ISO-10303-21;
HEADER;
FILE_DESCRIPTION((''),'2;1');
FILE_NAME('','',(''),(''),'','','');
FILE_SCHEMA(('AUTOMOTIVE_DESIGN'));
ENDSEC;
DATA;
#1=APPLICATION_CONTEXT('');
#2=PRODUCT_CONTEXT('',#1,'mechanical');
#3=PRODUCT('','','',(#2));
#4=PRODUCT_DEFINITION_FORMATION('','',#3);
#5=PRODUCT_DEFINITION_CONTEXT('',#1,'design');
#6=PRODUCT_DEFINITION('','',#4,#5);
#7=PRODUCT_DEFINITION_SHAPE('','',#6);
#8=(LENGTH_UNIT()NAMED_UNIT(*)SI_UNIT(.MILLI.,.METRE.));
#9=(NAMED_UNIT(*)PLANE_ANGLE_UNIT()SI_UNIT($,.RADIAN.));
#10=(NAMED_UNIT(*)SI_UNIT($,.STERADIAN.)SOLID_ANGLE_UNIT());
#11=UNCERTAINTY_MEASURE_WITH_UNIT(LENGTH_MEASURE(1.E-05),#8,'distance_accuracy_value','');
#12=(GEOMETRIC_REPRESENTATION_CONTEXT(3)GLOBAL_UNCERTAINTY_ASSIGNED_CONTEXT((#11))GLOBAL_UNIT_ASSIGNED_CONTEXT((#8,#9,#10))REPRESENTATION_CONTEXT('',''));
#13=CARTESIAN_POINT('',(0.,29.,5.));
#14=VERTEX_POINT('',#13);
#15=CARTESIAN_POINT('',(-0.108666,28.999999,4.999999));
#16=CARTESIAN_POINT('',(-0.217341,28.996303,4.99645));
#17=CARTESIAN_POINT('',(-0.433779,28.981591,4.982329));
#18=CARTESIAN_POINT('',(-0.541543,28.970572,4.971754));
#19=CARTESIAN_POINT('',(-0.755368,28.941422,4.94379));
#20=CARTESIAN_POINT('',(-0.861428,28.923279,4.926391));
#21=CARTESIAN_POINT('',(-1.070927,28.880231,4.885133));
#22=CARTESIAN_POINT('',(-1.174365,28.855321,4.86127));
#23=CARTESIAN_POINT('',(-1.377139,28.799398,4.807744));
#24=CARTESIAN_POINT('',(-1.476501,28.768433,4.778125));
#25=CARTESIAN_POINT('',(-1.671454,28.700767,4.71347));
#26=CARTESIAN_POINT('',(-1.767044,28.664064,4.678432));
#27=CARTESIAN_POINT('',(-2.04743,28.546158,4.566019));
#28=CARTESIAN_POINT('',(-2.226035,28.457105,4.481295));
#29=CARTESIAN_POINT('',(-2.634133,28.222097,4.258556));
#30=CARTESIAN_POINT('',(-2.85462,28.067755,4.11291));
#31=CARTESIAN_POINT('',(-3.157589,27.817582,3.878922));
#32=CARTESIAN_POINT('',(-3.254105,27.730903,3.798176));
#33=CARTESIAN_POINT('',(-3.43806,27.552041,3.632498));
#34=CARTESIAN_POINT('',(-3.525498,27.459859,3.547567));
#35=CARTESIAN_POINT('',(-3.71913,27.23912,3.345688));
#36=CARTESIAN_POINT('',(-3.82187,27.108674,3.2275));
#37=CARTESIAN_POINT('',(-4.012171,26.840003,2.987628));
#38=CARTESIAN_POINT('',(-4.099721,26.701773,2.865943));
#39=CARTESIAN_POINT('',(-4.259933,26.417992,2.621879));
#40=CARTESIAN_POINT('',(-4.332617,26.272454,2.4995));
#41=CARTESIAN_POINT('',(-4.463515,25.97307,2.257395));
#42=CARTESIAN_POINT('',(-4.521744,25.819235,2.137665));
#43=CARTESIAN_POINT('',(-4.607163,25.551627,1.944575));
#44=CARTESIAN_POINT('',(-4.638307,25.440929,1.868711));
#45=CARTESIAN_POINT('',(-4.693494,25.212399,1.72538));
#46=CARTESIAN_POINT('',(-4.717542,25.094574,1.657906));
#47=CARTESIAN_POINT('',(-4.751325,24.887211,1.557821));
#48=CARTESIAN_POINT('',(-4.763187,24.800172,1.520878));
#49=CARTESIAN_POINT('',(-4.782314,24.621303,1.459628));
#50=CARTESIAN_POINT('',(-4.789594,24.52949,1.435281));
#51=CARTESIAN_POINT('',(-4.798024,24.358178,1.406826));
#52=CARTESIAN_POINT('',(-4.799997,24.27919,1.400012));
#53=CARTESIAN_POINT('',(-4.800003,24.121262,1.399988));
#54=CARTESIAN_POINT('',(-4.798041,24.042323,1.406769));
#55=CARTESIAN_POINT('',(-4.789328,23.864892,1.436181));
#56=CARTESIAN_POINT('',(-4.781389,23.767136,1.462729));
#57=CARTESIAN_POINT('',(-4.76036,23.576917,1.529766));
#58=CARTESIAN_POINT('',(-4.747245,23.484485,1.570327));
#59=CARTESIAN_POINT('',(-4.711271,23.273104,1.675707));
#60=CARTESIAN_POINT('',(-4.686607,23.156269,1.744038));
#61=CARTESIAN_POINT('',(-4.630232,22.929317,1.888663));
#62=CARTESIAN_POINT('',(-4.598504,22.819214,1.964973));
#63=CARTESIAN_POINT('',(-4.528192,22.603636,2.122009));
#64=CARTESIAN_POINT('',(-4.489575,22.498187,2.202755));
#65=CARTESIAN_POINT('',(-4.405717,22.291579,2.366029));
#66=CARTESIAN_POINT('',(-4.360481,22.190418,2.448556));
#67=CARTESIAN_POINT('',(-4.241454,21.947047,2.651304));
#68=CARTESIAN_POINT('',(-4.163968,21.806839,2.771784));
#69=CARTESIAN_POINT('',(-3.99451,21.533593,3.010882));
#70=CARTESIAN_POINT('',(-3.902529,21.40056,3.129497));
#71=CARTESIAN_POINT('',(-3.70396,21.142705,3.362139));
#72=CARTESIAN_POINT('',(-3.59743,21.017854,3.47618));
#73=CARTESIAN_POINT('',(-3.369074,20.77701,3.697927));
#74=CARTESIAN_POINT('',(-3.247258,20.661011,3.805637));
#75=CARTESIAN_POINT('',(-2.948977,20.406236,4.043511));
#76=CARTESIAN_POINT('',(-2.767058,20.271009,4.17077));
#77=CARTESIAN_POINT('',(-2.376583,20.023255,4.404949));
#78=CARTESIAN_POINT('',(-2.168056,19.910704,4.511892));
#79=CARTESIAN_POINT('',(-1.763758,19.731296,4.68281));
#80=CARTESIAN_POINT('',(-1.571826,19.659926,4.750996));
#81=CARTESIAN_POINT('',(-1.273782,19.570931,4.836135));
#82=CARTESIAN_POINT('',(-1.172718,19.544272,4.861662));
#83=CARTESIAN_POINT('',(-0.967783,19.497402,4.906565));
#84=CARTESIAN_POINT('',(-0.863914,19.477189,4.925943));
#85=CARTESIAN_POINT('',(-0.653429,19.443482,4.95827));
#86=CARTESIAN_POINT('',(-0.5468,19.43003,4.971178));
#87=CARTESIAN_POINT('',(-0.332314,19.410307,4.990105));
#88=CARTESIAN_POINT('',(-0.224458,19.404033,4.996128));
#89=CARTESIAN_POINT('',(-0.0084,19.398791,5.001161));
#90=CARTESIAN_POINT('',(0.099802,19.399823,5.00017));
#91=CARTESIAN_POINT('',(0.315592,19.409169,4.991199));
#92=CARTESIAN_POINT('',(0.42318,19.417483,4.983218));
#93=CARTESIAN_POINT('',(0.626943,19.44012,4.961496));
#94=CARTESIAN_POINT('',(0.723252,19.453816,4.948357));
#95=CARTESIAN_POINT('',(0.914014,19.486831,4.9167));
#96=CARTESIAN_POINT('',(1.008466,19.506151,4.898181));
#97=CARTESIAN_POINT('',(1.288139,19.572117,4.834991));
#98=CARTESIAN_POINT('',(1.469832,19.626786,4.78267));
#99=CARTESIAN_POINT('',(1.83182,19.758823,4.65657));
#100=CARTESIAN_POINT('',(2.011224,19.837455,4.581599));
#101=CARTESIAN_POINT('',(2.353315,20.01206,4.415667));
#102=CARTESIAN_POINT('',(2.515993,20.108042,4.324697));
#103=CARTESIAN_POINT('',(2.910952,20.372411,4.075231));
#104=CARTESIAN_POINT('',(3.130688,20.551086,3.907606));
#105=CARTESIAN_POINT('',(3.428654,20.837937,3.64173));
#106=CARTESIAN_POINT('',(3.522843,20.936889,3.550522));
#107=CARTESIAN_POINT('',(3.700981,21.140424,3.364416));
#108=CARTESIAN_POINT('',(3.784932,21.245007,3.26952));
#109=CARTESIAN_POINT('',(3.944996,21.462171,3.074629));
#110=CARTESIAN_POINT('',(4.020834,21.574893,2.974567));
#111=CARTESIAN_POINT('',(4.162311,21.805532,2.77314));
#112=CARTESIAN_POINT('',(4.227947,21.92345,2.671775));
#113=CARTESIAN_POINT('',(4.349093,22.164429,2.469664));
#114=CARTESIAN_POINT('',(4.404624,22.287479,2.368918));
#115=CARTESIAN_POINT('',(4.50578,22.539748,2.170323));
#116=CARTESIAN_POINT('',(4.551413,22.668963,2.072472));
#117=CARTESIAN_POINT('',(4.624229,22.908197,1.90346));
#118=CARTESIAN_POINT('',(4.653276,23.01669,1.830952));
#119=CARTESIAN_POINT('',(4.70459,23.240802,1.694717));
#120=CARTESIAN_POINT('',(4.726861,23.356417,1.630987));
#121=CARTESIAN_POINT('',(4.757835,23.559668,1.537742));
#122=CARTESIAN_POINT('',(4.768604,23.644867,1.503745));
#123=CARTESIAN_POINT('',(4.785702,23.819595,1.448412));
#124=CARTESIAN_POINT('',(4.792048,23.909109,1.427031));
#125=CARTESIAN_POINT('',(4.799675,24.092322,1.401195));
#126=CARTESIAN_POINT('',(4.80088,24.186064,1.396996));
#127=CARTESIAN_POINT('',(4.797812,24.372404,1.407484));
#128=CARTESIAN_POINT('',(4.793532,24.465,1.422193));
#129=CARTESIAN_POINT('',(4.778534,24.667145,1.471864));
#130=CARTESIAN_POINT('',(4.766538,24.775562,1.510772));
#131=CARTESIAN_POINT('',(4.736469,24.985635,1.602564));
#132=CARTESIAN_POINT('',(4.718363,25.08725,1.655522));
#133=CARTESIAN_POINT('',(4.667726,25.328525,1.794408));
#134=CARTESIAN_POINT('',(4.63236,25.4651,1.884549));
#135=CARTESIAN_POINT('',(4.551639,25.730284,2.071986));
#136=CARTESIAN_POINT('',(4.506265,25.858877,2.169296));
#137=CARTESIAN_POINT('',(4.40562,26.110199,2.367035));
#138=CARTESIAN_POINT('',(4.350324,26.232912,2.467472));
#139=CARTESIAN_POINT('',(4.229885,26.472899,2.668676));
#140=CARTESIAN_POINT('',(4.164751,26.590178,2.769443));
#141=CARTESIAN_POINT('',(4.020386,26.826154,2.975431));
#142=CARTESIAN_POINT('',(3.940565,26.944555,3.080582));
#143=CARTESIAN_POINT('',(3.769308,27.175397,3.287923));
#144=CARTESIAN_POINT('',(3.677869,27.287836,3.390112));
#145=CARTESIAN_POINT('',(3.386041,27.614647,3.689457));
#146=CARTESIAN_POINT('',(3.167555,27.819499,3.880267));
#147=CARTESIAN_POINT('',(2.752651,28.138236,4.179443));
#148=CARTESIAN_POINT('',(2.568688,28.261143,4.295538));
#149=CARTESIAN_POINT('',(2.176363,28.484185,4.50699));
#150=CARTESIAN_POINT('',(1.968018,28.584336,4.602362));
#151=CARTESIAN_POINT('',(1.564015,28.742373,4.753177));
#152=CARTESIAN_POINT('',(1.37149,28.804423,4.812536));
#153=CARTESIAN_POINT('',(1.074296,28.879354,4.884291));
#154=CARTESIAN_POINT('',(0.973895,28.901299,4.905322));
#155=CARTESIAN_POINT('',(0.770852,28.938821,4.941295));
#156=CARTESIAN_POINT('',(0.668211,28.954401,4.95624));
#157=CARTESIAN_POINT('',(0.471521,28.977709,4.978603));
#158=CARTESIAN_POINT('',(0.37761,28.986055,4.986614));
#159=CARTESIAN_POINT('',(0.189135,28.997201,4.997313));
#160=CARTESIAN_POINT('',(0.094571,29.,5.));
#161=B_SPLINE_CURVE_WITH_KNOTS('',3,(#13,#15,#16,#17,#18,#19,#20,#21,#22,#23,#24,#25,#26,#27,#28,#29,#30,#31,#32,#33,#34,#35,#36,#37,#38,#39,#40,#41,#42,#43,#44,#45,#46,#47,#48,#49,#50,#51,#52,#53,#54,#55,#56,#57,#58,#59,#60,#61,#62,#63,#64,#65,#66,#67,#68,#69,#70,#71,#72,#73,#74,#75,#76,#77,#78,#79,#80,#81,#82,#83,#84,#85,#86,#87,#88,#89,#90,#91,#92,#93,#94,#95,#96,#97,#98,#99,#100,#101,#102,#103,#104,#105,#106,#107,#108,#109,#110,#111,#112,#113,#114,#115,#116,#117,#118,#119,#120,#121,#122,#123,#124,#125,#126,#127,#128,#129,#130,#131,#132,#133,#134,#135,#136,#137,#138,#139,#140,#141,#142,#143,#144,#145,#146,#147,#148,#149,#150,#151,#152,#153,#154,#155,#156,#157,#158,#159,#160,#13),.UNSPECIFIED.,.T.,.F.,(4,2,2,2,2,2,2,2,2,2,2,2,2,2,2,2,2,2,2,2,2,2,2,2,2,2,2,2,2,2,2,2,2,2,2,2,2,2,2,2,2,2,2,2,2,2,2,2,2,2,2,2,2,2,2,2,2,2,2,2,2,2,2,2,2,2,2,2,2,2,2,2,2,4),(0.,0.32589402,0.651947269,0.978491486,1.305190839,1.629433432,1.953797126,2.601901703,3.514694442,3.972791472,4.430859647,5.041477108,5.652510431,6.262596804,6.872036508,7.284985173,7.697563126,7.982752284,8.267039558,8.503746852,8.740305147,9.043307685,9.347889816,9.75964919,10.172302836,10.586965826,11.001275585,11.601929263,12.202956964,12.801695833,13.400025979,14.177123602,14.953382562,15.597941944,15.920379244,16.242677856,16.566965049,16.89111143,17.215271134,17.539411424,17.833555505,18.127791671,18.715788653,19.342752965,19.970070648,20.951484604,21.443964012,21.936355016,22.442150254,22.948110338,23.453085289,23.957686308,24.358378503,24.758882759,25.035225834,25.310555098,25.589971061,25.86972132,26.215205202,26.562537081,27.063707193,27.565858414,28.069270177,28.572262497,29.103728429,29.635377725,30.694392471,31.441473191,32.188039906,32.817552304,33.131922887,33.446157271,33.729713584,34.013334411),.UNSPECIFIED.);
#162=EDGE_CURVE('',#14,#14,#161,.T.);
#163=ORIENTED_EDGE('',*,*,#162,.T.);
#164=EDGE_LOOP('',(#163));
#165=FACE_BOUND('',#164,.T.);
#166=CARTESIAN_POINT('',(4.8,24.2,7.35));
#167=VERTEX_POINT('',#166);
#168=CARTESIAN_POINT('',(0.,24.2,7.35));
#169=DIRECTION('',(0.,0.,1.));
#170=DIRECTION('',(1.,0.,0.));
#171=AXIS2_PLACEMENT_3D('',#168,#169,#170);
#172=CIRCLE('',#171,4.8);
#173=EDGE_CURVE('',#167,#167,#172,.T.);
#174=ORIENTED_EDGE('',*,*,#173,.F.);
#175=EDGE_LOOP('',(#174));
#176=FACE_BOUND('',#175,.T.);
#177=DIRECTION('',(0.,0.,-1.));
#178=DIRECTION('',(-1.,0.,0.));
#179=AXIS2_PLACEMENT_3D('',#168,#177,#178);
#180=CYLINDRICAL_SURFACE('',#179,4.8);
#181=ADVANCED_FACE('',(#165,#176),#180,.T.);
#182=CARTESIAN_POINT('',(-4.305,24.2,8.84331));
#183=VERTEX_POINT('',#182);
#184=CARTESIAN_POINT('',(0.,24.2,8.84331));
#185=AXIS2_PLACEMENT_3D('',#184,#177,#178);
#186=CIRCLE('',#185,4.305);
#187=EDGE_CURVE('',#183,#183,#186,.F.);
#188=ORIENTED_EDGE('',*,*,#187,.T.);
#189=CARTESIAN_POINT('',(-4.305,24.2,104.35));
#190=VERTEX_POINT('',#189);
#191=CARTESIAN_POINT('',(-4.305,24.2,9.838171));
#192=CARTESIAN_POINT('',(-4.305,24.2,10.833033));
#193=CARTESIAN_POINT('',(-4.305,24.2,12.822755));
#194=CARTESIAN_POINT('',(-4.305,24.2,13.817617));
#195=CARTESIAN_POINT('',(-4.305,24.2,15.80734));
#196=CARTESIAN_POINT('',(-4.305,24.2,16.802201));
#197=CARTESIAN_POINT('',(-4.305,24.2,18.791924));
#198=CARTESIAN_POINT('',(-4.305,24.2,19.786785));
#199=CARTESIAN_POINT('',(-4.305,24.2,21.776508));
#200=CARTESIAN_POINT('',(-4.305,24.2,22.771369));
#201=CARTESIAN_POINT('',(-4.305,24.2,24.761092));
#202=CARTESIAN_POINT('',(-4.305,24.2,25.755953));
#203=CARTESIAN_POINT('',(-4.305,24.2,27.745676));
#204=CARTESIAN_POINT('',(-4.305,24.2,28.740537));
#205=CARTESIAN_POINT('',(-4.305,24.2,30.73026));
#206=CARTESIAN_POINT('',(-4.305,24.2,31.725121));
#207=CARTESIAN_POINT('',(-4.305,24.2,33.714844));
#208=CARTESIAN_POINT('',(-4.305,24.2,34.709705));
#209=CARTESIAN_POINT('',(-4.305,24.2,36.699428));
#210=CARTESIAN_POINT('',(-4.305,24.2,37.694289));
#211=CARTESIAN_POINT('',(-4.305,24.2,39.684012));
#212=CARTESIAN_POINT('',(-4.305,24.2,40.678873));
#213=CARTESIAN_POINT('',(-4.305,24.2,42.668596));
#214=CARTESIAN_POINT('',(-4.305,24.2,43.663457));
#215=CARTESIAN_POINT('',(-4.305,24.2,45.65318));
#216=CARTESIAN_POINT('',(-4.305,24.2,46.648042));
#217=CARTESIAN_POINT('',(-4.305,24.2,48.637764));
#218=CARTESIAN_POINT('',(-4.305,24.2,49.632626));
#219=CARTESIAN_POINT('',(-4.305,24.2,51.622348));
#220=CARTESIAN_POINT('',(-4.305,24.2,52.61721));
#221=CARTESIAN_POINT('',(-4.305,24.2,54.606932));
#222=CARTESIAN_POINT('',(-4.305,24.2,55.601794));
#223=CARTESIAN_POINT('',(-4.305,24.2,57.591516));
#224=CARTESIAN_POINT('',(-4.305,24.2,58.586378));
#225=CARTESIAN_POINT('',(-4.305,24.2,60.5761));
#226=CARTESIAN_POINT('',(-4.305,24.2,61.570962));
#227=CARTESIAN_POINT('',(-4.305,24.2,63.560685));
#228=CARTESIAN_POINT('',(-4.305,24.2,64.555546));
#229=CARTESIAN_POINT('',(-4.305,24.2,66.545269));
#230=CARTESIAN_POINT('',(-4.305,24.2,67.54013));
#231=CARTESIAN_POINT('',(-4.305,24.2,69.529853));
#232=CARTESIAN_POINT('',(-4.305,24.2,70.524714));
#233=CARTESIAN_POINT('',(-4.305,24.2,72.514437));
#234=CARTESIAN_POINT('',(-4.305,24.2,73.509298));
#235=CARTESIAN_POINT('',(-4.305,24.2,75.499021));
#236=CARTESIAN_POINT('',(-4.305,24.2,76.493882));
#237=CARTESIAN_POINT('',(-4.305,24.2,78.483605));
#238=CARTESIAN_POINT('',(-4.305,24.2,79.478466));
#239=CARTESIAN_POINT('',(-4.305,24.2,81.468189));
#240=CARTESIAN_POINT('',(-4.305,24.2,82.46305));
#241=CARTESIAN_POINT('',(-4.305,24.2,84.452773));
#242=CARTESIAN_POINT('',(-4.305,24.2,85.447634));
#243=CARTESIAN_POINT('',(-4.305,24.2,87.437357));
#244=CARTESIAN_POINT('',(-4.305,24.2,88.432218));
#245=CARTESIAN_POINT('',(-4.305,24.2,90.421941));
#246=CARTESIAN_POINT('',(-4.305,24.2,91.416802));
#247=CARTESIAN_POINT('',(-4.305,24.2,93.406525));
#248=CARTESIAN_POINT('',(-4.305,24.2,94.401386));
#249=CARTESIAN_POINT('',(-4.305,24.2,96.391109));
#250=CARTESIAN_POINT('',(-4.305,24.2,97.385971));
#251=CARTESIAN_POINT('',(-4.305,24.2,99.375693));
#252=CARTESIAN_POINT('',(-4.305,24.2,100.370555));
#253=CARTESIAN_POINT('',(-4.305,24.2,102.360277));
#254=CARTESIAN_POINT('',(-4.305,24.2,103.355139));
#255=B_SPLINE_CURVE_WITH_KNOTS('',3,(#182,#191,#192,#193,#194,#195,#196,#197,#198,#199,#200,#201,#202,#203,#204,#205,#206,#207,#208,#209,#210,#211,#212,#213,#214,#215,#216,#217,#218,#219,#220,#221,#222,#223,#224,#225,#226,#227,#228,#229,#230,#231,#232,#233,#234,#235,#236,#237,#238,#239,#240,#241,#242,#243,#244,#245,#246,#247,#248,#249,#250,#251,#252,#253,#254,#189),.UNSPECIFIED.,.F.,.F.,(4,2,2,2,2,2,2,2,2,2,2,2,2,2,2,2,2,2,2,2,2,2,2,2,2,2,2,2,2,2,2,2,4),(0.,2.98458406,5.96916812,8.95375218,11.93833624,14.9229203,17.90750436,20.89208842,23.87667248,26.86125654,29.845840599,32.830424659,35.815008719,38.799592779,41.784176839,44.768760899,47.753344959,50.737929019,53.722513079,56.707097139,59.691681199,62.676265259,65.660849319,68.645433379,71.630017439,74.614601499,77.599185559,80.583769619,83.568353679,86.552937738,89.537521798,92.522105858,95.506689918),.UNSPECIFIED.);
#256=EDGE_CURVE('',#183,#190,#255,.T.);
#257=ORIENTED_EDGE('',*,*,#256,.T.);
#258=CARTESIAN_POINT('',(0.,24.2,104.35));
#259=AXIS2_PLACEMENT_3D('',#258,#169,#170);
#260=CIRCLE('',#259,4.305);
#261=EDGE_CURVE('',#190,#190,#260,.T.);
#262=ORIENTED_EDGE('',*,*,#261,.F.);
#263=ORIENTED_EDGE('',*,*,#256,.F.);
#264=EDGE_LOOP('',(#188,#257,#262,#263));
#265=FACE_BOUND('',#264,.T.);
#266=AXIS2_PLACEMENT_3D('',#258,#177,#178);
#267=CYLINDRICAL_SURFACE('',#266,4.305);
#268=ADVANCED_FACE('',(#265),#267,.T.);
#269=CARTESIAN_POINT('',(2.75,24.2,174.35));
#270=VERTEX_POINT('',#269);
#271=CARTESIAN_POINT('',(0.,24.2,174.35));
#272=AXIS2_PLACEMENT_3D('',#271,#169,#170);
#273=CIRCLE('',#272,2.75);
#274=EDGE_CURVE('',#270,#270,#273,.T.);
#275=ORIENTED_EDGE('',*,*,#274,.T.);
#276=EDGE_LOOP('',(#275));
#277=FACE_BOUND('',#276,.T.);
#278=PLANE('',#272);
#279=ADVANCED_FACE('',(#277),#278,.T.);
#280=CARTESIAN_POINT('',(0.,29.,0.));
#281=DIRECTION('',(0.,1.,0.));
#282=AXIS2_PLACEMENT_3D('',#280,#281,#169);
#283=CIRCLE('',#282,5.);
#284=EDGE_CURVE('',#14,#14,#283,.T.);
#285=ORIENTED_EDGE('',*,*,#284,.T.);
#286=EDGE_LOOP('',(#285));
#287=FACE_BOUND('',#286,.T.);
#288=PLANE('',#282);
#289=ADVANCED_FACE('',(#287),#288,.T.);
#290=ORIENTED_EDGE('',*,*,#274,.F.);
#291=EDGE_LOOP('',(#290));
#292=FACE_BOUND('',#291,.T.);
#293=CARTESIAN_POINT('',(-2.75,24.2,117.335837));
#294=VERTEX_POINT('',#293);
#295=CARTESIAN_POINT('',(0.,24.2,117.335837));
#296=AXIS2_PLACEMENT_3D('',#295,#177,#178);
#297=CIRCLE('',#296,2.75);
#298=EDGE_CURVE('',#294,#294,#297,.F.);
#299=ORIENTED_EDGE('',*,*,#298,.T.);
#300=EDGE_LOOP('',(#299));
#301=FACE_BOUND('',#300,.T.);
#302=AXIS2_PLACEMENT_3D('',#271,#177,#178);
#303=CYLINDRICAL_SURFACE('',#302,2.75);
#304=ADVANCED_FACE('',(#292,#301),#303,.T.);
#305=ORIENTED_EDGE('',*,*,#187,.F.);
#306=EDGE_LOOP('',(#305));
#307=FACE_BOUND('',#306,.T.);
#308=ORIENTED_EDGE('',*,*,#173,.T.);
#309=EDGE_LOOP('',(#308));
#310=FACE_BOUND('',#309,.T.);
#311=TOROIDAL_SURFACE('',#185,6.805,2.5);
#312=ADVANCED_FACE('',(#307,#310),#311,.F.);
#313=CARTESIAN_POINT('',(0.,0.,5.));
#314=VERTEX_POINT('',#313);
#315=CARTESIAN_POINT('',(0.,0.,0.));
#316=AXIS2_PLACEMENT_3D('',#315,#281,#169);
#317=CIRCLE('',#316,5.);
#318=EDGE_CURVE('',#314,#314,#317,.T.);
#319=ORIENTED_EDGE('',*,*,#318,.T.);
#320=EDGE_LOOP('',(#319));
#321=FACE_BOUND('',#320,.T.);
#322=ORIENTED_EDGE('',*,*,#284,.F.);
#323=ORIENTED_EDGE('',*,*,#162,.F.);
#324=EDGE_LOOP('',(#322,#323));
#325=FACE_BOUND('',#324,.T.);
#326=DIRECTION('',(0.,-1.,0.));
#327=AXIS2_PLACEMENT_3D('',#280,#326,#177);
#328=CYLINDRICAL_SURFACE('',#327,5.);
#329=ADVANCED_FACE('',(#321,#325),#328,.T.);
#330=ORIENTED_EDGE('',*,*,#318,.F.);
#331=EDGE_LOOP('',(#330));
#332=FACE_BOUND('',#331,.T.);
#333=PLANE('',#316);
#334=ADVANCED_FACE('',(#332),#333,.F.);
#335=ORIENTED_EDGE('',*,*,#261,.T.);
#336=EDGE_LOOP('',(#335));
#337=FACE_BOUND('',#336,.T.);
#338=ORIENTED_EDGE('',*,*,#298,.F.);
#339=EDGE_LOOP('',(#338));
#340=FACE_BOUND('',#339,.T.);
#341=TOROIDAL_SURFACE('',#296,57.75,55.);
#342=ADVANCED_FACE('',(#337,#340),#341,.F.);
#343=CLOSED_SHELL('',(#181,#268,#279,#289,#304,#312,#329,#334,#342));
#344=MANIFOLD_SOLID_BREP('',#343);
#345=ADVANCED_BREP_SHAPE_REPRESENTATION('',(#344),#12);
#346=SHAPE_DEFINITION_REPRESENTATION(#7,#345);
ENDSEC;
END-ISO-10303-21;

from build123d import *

# Parameters (mm, degrees)
SKETCH1_R           = 5
BOSS_EXTRUDE1_DEPTH = 29
SKETCH2_R           = 4.8
BOSS_EXTRUDE2_DEPTH = 7.35
SKETCH3_R           = 4.305
BOSS_EXTRUDE3_DEPTH = 97
SKETCH4_R           = 2.75
BOSS_EXTRUDE4_DEPTH = 70
FILLET1_R           = 55
FILLET2_R           = 2.5


with BuildPart() as part:
    # Sketch1 → Boss-Extrude1 (new body)
    with BuildSketch(Plane(origin=(0, 0, 0), x_dir=(1, 0, 0), z_dir=(0, 1, 0))):
        with Locations(Location((0, 0, 0), (0, 0, 90))):
            Circle(SKETCH1_R)
    extrude(amount=BOSS_EXTRUDE1_DEPTH)

    # Sketch2 → Boss-Extrude2 (add)
    with BuildSketch(Plane.XY):
        with Locations(Location((0, 24.2, 0), (0, 0, 90))):
            Circle(SKETCH2_R)
    extrude(amount=BOSS_EXTRUDE2_DEPTH)

    # Sketch3 → Boss-Extrude3 (add)
    with BuildSketch(Plane.XY.offset(7.35)):
        with Locations(Location((0, 24.2, 0), (0, 0, 180))):
            Circle(SKETCH3_R)
    extrude(amount=BOSS_EXTRUDE3_DEPTH)

    # Sketch4 → Boss-Extrude4 (add)
    with BuildSketch(Plane.XY.offset(104.35)):
        with Locations((0, 24.2)):
            Circle(SKETCH4_R)
    extrude(amount=BOSS_EXTRUDE4_DEPTH)

    # Fillet1
    # the kernel refuses this fillet: 55 mm, written as the material it adds along each edge
    with BuildSketch(Plane(origin=(0, 24.2, 104.35), x_dir=(1, 0, 0), z_dir=(0, -1, 0))) as fillet1_piece_1:
        with BuildLine():
            CenterArc((57.75, 12.985837478), FILLET1_R, 180, 13.656834666)
            Line((2.75, 12.985837478), (1.65, 12.985837478))
            Line((1.65, 12.985837478), (1.65, 0))
            Line((1.65, 0), (2.75, -1.1))
            ThreePointArc((2.75, -1.1), (3.5275, -1.1), (3.2361, -0.25971675))
            Line((3.2361, -0.25971675), (4.305, 0))
        make_face()
    revolve(axis=Axis((0, 24.2, 104.35), (0, 0, 1)))

    # Fillet2
    # the kernel refuses this fillet: 2.5 mm, written as the material it adds along each edge
    with BuildSketch(Plane(origin=(0, 24.2, 7.35), x_dir=(-1, 0, 0), z_dir=(0, 1, 0))) as fillet2_piece_1:
        with BuildLine():
            CenterArc((6.805, 1.493310082), FILLET2_R, 180, 36.678485047)
            Line((4.8, 0), (4.7599, -0.029866202))
            ThreePointArc((4.7599, -0.029866202), (4.5525, -0.05), (4.305, -0.05))
            Line((4.305, -0.05), (4.255, 0))
            Line((4.255, 0), (4.255, 1.493310082))
            Line((4.255, 1.493310082), (4.305, 1.493310082))
        make_face()
    revolve(axis=Axis((0, 24.2, 7.35), (0, 0, 1)))


solid = part.part
